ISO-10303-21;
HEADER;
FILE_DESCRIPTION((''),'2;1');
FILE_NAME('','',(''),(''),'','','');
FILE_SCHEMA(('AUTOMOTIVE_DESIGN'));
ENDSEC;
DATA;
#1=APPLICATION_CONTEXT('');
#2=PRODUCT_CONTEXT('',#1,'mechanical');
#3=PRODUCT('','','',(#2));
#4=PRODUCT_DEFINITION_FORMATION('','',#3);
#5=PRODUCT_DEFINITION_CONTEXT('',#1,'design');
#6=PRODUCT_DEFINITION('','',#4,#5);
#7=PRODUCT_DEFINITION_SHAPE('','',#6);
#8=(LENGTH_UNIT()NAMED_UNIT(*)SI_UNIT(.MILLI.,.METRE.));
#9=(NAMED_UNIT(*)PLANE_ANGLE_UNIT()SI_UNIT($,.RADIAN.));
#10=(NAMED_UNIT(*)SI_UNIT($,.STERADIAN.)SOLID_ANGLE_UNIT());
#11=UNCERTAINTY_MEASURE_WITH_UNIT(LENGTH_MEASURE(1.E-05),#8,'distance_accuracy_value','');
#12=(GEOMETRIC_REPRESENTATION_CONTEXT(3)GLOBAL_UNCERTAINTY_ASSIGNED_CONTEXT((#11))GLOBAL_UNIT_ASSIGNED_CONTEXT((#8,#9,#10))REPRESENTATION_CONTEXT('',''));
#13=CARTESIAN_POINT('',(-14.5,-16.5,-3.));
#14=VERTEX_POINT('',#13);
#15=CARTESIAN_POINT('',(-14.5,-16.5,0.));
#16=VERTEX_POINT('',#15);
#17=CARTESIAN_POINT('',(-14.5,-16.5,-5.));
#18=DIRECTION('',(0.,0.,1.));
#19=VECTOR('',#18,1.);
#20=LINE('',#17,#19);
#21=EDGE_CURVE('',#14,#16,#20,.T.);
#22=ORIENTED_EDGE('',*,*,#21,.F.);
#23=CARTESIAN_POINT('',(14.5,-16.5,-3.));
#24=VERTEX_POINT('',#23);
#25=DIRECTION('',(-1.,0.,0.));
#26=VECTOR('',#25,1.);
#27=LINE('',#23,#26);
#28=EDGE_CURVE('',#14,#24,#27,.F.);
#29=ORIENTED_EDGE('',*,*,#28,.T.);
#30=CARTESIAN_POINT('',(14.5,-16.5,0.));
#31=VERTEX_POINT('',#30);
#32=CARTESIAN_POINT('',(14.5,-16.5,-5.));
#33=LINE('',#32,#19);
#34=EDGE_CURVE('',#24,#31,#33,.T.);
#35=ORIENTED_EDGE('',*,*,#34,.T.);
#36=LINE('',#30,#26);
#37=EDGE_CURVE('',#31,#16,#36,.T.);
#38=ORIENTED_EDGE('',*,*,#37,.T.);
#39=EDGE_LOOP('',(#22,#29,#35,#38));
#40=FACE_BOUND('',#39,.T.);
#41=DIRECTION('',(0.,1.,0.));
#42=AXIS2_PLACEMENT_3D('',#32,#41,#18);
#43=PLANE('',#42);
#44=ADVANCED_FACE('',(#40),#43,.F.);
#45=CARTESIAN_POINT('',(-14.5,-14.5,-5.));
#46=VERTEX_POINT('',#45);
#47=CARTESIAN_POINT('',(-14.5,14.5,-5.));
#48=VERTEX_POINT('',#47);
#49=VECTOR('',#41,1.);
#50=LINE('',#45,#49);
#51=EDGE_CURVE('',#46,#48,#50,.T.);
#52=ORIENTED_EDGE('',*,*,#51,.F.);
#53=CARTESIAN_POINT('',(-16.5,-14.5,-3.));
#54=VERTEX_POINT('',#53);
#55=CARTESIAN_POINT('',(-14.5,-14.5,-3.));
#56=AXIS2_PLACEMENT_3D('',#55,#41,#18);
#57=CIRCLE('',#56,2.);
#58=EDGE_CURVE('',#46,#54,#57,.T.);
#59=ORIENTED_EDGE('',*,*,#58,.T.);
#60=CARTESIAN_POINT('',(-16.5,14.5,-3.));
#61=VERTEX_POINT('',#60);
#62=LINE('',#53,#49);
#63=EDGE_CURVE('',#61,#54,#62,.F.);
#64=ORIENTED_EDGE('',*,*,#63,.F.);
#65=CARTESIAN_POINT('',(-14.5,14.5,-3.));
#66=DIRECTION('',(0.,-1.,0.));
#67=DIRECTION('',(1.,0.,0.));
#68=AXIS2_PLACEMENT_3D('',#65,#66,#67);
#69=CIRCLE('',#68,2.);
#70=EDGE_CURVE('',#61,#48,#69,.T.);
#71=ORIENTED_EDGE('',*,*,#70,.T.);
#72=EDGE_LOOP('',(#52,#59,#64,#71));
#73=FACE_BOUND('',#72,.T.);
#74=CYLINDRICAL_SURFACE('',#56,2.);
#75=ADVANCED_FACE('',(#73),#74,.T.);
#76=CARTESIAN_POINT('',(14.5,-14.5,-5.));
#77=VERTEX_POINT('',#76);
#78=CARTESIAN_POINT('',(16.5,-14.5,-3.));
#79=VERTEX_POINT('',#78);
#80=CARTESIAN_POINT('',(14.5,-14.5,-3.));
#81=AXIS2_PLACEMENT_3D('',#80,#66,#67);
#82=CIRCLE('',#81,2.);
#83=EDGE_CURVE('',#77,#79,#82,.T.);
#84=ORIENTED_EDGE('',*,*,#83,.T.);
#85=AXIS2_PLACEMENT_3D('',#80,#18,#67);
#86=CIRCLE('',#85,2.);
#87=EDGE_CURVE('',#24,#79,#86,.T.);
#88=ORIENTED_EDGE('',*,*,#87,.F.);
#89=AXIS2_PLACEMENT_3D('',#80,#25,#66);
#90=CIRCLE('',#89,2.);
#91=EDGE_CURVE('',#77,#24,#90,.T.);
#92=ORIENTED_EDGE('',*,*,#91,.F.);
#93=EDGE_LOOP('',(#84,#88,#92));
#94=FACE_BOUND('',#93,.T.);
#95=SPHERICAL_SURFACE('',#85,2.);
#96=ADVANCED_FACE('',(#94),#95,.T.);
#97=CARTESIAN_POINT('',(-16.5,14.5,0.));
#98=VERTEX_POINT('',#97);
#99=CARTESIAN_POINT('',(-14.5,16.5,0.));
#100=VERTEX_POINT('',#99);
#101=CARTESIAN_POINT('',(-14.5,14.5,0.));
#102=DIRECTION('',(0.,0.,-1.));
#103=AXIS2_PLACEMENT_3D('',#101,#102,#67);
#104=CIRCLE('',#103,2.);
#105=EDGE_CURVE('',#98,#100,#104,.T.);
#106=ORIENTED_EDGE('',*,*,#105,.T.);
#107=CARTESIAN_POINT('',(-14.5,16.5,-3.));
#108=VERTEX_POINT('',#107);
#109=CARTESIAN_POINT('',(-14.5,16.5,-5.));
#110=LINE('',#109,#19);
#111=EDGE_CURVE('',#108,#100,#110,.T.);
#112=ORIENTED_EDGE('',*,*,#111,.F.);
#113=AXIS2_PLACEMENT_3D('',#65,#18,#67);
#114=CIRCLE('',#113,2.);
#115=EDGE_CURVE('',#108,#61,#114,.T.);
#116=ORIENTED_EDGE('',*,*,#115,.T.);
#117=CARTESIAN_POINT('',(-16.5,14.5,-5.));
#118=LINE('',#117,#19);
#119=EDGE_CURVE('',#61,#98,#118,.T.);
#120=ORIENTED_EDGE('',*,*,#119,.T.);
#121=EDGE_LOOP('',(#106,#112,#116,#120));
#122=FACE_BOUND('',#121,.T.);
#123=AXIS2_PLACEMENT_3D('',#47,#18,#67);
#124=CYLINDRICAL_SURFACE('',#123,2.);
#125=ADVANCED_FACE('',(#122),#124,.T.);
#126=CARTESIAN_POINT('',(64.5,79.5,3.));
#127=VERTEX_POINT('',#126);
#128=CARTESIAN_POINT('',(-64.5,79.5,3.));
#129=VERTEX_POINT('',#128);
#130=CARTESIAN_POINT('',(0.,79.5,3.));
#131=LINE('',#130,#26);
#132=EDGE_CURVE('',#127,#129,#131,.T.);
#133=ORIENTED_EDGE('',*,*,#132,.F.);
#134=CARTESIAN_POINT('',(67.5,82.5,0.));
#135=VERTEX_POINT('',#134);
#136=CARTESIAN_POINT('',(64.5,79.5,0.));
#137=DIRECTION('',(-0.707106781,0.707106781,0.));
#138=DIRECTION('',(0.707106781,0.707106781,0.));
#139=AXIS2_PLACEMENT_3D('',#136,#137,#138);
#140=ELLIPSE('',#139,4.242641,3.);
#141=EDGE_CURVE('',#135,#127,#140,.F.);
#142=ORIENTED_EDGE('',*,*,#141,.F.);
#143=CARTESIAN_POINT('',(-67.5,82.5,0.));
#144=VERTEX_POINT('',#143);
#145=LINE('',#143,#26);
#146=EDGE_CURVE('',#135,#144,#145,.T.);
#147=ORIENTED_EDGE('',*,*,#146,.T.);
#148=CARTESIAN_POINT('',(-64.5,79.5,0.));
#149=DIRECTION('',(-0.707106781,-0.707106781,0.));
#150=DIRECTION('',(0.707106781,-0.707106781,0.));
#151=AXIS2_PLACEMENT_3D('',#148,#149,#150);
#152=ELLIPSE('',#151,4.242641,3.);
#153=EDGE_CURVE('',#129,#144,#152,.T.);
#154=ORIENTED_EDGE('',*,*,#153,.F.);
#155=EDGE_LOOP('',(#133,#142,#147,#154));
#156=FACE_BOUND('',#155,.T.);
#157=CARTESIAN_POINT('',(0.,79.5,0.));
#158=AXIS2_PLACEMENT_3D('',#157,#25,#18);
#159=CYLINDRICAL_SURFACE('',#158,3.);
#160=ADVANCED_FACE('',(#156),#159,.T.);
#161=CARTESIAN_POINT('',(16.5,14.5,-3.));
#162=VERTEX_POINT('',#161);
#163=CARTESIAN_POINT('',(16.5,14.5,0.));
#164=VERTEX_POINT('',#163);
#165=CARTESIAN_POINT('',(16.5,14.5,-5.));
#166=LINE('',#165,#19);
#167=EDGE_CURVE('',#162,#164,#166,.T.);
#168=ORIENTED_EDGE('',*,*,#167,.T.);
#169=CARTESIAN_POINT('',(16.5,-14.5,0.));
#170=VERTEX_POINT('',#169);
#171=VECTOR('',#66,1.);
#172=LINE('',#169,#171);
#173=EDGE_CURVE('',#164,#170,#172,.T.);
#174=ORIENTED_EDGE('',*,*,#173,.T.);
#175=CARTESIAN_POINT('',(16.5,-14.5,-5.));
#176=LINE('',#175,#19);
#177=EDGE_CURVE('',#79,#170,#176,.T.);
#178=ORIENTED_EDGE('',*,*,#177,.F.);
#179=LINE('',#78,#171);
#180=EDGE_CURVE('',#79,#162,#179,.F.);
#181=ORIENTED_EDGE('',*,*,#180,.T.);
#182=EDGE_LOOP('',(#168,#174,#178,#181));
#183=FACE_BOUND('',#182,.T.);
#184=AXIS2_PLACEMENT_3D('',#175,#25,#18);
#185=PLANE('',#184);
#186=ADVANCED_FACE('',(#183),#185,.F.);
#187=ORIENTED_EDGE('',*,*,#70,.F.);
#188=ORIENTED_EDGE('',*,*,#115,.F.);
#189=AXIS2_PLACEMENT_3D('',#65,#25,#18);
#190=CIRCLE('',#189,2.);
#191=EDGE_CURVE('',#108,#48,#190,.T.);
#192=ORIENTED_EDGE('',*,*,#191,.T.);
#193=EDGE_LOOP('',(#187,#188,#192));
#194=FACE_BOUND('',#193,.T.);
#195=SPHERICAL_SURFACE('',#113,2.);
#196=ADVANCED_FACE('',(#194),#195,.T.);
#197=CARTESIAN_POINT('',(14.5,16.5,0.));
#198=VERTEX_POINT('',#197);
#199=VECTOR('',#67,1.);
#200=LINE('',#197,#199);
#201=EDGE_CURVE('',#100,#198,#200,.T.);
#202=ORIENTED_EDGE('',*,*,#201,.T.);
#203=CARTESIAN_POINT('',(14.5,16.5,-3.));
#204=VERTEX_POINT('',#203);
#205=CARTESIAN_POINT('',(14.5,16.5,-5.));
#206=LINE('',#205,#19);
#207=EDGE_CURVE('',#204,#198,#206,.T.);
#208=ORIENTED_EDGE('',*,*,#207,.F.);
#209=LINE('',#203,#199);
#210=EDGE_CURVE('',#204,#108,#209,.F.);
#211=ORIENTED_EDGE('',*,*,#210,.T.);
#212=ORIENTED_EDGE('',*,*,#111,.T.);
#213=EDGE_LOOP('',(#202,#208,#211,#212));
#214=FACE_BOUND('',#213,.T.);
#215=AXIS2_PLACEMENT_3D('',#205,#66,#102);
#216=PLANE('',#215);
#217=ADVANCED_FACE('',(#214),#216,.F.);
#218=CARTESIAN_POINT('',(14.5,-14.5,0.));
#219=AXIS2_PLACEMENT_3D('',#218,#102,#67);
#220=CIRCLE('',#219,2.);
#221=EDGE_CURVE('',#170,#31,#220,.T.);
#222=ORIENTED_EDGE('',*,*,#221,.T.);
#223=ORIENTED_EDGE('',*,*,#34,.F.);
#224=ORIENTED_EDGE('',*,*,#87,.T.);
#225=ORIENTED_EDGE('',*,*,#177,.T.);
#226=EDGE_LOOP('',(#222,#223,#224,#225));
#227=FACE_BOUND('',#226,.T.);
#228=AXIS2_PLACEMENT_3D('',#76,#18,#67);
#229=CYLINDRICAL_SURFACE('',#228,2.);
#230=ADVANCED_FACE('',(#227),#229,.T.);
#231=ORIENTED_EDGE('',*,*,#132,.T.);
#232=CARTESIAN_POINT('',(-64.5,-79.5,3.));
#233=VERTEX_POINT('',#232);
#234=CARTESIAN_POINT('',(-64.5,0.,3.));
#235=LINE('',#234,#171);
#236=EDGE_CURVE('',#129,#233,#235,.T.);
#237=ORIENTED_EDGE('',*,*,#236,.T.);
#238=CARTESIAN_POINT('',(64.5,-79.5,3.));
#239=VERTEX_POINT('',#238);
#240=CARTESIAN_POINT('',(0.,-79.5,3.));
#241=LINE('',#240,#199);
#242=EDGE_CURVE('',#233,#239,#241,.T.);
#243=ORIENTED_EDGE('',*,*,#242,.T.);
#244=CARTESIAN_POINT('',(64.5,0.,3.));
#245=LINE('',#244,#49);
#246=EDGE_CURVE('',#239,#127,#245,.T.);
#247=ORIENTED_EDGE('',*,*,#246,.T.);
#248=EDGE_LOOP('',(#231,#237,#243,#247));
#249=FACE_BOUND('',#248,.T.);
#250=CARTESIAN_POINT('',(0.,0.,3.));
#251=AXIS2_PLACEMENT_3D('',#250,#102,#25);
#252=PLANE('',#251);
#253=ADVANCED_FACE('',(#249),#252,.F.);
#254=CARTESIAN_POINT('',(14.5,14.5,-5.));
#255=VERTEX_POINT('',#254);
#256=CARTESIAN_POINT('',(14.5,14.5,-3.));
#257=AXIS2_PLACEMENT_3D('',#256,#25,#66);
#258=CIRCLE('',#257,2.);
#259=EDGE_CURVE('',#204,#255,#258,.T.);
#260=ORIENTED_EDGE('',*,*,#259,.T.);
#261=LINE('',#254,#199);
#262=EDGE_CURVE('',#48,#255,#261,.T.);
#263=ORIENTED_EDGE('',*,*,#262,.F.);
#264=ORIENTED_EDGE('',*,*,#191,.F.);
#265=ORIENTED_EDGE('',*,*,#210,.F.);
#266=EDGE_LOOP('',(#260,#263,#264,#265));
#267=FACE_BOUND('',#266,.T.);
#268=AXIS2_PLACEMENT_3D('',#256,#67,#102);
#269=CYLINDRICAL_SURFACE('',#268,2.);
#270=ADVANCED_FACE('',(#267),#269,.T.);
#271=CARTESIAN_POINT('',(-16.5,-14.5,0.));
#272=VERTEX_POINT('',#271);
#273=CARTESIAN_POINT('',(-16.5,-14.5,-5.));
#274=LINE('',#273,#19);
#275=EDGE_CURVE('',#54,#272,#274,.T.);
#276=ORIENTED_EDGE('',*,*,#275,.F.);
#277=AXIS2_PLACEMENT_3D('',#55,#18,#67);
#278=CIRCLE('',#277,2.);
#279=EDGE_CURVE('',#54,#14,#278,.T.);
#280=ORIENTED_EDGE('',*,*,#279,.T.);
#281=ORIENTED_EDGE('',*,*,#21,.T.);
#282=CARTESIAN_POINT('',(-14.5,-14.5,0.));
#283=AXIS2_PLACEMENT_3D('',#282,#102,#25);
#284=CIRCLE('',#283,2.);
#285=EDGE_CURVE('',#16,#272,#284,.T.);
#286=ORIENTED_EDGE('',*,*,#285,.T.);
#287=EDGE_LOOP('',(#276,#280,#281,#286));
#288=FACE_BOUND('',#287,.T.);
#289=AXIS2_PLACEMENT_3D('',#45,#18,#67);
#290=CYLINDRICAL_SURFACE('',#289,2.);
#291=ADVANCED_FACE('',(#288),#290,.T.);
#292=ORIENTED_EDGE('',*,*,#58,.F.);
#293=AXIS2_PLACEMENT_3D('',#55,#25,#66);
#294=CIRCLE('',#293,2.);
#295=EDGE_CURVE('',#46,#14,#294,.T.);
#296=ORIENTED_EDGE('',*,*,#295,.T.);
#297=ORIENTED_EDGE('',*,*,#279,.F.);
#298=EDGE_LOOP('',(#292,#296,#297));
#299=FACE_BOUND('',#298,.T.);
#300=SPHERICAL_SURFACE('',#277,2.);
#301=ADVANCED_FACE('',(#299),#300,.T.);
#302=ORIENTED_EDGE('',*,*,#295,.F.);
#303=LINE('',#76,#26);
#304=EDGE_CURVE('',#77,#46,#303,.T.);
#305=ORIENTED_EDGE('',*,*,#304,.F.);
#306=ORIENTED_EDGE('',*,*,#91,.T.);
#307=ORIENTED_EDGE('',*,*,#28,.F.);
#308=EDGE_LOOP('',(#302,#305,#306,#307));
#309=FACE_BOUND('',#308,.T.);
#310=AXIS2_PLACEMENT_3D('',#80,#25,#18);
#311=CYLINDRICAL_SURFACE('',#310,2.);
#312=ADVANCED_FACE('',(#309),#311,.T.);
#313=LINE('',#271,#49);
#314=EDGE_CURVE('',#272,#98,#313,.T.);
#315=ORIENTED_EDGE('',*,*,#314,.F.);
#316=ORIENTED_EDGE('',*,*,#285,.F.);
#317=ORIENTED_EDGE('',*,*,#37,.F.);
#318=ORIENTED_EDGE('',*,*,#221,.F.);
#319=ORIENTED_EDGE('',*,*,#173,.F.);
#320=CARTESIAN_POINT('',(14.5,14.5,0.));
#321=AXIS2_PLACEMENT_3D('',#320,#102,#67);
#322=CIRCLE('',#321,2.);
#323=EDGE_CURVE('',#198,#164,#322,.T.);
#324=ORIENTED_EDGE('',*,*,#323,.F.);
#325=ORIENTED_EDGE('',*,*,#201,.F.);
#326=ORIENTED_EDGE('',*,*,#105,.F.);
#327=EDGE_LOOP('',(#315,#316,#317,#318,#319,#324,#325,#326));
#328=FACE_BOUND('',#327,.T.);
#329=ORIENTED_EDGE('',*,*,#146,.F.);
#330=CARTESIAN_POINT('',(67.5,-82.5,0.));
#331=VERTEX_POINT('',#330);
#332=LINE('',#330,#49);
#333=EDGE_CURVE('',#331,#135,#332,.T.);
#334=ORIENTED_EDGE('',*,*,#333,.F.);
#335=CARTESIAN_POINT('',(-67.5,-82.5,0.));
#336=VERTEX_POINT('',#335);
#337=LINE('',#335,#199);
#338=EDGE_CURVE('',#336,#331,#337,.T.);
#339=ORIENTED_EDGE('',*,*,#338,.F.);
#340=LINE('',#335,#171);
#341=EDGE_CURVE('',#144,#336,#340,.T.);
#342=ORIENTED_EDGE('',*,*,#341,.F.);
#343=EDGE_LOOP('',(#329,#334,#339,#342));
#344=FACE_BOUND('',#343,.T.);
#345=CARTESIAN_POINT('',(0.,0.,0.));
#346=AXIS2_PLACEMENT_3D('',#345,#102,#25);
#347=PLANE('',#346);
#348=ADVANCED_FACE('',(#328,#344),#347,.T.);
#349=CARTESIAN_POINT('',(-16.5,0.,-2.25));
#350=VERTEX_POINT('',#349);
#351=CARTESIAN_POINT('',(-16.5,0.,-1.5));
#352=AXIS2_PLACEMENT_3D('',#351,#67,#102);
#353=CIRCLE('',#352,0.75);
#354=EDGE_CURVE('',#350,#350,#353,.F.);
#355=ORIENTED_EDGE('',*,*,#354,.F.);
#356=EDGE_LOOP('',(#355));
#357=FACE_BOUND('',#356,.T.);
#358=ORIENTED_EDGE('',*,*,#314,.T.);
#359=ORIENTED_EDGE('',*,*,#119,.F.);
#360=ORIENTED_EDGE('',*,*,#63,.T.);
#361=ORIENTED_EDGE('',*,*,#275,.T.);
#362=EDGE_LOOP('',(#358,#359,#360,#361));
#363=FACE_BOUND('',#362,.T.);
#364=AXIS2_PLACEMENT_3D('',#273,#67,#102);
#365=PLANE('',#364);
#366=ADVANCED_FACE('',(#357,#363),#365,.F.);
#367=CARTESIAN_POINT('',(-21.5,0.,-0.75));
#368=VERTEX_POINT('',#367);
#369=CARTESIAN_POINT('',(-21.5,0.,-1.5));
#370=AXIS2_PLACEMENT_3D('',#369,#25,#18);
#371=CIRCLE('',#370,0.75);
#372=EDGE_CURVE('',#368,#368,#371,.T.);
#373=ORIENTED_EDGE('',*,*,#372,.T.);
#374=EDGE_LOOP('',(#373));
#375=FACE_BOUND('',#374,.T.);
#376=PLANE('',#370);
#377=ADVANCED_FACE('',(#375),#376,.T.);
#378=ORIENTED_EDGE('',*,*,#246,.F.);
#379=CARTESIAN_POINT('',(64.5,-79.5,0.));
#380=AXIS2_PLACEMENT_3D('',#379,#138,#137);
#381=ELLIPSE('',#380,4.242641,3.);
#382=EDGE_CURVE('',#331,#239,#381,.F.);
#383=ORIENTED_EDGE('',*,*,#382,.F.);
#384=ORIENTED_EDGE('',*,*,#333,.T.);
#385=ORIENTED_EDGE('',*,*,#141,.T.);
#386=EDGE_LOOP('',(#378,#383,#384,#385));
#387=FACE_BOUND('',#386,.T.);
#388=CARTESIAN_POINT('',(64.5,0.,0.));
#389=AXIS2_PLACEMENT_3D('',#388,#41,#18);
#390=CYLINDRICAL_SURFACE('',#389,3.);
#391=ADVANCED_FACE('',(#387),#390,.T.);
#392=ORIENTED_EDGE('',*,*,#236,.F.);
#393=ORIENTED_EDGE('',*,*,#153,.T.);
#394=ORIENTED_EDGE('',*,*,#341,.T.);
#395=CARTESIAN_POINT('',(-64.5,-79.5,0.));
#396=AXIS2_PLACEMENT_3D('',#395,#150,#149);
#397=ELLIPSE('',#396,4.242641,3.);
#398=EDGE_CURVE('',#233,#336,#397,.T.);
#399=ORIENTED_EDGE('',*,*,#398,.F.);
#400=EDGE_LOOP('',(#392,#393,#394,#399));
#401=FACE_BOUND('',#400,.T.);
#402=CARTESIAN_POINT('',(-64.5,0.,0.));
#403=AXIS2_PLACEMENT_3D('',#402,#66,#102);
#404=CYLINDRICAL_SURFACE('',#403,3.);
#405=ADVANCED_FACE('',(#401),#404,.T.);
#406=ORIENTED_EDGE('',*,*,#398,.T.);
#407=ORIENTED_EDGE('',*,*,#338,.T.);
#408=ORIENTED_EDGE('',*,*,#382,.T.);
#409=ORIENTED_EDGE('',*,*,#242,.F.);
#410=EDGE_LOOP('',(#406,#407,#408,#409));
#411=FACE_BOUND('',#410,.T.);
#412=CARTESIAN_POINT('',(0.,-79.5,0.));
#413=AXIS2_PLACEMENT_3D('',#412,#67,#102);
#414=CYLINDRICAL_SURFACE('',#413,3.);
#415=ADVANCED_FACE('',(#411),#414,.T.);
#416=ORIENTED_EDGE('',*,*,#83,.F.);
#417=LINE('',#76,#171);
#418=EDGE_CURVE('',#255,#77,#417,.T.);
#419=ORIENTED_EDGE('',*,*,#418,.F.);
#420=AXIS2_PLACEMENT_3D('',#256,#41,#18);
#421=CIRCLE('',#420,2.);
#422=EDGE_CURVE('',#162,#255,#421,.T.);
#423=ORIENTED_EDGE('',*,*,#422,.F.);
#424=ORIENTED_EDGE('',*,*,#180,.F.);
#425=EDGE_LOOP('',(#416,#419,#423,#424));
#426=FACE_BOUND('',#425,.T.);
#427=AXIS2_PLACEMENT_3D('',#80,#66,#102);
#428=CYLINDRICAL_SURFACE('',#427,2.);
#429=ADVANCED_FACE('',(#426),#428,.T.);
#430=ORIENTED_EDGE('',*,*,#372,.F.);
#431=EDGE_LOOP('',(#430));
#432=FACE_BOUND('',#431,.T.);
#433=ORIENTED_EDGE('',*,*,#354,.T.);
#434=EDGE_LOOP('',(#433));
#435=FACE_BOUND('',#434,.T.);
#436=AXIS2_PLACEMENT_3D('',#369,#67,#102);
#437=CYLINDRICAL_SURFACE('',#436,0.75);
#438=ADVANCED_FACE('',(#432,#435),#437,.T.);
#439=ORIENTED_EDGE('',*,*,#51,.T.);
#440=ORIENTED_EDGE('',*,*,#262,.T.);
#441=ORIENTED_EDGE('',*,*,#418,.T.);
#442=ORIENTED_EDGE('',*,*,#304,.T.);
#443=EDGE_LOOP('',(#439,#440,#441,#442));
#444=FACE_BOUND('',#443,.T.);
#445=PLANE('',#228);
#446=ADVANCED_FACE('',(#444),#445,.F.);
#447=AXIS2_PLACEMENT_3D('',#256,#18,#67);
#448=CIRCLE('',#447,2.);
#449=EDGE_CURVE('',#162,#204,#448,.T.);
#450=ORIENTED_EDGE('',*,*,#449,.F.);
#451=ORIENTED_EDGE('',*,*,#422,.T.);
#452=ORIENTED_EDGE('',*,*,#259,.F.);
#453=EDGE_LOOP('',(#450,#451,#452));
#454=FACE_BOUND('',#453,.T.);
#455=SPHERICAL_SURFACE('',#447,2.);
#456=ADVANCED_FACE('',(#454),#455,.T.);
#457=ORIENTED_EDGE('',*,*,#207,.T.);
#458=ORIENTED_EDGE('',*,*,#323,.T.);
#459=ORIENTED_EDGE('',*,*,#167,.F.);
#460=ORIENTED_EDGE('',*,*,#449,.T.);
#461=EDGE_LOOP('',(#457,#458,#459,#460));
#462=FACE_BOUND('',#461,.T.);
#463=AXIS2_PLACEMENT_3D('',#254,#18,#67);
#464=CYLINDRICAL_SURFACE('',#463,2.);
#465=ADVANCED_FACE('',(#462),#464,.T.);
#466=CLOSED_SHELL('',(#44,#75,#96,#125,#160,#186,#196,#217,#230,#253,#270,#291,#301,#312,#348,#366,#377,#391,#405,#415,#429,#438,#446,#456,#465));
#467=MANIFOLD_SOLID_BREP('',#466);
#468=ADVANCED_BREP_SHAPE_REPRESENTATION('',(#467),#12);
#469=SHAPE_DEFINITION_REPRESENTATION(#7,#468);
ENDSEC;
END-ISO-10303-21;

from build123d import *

# Parameters (mm, degrees)
ESQUISSE1_W        = 135
ESQUISSE1_H        = 165
BOSS_EXTRU_1_DEPTH = 3
CONG_1_R           = 3
BOSS_EXTRU_2_DEPTH = 5
CONG_2_R           = 2
ESQUISSE3_R        = 0.75
BOSS_EXTRU_3_DEPTH = 5


with BuildPart() as part:
    # Esquisse1 → Boss.-Extru.1 (new body)
    with BuildSketch(Plane.XY):
        Rectangle(ESQUISSE1_W, ESQUISSE1_H)
    extrude(amount=BOSS_EXTRU_1_DEPTH)

    # Congé1
    cong_1_edges = [part.edges().sort_by_distance(p)[0] for p in [
        (0, -82.5, 3),
        (0, 82.5, 3),
        (67.5, 0, 3),
        (-67.5, 0, 3),
    ]]
    fillet(cong_1_edges, radius=CONG_1_R - 0.0001)  # a hair under: the kernel refuses the full size

    # Esquisse2 → Boss.-Extru.2 (add)
    with BuildSketch(Plane(origin=(0, 0, 0), x_dir=(-1, 0, 0), z_dir=(0, 0, -1))):
        with BuildLine():
            Line((-14.5, -16.5), (14.5, -16.5))
            ThreePointArc((14.5, -16.5), (15.914213562, -15.914213562), (16.5, -14.5))
            Line((16.5, -14.5), (16.5, 14.5))
            ThreePointArc((16.5, 14.5), (15.914213562, 15.914213562), (14.5, 16.5))
            Line((14.5, 16.5), (-14.5, 16.5))
            ThreePointArc((-14.5, 16.5), (-15.914213562, 15.914213562), (-16.5, 14.5))
            Line((-16.5, 14.5), (-16.5, -14.5))
            ThreePointArc((-16.5, -14.5), (-15.914213562, -15.914213562), (-14.5, -16.5))
        make_face()
    extrude(amount=BOSS_EXTRU_2_DEPTH)

    # Congé2
    cong_2_edges = [part.edges().sort_by_distance(p)[0] for p in [
        (15.914213562, -15.914213562, -5),
        (0, -16.5, -5),
        (-15.914213562, -15.914213562, -5),
        (-16.5, 0, -5),
        (-15.914213562, 15.914213562, -5),
        (0, 16.5, -5),
        (15.914213562, 15.914213562, -5),
        (16.5, 0, -5),
    ]]
    fillet(cong_2_edges, radius=CONG_2_R)

    # Esquisse3 → Boss.-Extru.3 (add)
    with BuildSketch(Plane.ZY.offset(16.5)):
        with Locations(Location((-1.5, 0, 0), (0, 0, 180))):
            Circle(ESQUISSE3_R)
    extrude(amount=BOSS_EXTRU_3_DEPTH)


solid = part.part
